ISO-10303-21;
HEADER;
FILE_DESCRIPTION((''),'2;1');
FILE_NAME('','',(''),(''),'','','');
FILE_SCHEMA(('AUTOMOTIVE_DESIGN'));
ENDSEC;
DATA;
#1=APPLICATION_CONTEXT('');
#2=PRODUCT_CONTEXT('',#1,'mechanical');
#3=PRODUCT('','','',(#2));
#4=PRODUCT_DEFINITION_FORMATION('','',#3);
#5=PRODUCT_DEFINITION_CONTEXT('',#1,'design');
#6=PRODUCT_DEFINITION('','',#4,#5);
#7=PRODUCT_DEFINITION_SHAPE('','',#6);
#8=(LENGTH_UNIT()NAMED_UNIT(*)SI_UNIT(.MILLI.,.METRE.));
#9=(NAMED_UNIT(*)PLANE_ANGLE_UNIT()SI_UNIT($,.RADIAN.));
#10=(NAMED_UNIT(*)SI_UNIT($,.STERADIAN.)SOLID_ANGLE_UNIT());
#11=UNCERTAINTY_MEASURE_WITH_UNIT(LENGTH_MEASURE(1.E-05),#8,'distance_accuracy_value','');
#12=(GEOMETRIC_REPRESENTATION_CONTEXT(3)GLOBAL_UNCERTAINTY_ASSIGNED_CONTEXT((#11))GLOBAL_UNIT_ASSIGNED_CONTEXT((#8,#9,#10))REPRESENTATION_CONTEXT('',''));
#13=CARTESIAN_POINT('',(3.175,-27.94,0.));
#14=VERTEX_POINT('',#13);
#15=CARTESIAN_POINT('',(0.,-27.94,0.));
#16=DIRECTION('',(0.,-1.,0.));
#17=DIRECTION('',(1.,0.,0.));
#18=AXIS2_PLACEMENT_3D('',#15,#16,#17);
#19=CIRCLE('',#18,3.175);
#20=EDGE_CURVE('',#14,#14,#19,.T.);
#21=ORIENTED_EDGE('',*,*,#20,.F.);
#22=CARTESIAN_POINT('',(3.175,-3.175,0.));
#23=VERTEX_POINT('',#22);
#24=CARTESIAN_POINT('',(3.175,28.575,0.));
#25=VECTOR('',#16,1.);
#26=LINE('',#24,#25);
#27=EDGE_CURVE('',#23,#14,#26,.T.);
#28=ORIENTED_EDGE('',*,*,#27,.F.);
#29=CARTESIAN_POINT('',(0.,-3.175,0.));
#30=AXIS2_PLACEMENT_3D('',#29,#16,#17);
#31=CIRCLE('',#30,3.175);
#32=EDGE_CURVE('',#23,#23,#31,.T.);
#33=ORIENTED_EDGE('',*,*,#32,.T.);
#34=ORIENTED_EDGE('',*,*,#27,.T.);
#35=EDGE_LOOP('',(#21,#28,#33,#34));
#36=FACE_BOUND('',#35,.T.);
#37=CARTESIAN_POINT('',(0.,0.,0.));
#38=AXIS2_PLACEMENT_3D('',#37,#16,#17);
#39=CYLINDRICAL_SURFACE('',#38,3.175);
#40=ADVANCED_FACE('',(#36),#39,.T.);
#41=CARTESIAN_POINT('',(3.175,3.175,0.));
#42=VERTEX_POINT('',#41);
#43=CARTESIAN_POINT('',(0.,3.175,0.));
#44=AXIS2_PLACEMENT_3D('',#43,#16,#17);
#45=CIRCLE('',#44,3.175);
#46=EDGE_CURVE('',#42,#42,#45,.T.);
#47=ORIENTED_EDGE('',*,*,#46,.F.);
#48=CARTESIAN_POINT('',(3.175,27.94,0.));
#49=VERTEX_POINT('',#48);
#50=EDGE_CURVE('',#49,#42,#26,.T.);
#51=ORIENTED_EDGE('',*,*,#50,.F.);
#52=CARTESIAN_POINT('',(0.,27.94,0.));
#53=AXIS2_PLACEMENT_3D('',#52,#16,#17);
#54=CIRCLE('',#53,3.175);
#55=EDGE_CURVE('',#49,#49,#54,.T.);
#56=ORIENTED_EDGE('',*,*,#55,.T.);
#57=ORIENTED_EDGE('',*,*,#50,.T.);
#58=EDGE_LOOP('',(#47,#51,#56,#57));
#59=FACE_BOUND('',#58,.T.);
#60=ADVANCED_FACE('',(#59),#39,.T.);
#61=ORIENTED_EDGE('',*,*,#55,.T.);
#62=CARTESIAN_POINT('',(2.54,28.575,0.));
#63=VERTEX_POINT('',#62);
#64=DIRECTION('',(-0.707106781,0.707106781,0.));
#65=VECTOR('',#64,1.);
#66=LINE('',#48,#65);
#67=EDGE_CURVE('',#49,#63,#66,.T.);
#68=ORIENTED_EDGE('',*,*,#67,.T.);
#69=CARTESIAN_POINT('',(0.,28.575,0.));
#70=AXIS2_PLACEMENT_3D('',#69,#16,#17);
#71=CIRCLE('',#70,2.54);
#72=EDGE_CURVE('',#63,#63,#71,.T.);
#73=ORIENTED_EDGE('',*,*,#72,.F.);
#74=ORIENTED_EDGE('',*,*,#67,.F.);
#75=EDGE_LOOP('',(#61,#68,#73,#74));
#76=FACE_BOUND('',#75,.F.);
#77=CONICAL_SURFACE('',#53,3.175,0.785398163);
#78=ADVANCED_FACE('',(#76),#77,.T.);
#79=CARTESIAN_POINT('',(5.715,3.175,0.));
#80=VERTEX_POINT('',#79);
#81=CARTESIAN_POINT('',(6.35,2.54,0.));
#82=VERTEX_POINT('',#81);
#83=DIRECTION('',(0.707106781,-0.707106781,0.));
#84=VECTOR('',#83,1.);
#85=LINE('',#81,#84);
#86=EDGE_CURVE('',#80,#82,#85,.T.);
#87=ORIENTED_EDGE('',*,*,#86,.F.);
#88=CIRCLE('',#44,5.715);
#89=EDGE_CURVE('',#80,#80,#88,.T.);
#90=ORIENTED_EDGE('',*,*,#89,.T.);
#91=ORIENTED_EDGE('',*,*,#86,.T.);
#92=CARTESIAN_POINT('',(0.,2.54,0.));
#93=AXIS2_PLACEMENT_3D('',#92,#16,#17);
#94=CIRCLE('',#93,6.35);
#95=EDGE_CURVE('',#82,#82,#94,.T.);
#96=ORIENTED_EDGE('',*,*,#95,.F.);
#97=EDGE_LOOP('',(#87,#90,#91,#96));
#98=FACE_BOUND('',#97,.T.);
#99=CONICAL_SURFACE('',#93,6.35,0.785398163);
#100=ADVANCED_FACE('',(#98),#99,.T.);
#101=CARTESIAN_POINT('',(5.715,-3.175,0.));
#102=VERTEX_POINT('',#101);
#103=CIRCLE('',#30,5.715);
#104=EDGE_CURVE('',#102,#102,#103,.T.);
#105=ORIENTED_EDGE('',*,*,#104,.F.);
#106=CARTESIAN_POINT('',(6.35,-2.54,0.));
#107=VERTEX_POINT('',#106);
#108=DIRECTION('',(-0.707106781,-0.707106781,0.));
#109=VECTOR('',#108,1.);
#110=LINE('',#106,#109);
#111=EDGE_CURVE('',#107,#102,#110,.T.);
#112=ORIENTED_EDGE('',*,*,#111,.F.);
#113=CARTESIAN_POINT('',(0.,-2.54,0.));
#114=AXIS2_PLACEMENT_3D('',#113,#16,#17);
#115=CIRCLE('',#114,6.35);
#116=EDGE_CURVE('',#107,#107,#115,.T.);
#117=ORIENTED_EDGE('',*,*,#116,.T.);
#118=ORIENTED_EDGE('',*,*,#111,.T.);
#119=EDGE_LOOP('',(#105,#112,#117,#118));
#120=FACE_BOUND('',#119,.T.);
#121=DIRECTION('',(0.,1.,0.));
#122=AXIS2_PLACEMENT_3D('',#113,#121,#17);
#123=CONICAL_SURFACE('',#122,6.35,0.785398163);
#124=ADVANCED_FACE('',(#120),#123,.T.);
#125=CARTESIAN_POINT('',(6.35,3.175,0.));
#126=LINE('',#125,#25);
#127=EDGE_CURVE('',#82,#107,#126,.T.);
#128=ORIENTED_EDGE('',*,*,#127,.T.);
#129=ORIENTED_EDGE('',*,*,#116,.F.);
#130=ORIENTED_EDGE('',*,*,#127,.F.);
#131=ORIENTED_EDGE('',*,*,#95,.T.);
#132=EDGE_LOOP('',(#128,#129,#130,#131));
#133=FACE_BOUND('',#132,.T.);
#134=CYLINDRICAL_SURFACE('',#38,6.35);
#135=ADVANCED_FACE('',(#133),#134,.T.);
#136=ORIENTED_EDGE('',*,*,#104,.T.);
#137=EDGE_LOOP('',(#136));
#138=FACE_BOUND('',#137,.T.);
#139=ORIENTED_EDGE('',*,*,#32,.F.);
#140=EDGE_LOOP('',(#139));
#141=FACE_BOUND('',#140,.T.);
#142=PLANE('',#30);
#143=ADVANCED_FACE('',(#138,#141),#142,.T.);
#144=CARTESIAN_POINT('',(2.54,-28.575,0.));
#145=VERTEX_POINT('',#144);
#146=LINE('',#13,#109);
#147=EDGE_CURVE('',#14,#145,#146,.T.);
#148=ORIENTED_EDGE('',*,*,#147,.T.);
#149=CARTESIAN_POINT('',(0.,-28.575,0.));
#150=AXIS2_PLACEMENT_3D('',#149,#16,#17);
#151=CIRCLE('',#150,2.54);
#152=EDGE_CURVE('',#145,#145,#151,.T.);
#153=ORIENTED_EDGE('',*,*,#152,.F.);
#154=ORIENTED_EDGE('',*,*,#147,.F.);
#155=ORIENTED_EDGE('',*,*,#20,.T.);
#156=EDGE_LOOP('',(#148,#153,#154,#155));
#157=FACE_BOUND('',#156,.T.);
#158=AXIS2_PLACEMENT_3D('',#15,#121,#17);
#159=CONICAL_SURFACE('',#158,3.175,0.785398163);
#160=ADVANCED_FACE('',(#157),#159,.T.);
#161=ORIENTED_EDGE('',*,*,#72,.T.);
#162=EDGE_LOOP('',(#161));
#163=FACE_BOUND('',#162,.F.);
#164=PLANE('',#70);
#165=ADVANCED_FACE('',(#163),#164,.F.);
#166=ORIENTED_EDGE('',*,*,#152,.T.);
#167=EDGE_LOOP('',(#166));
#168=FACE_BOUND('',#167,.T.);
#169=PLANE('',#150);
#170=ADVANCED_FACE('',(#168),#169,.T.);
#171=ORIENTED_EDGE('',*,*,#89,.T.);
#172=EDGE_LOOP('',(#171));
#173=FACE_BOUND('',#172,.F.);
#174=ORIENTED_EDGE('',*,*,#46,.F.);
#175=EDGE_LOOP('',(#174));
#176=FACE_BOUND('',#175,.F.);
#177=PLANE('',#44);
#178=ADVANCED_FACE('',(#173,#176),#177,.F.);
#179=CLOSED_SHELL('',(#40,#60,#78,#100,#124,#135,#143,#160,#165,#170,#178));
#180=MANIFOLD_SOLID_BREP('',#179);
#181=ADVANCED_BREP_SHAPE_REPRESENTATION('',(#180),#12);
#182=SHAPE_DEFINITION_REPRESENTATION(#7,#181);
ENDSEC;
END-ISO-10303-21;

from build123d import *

# Parameters (mm, degrees)
F0_R     = 3.175
F1_DEPTH = 28.575
F0_R_2   = 6.35
F2_DEPTH = 3.175
F3_SIZE  = 0.635


with BuildPart() as f1:
    # F0 (on Front) → F1 (new body, symmetric)
    with BuildSketch(Plane.XZ):
        Circle(F0_R)
    extrude(amount=F1_DEPTH, both=True)

    # F0 (on Front) → F2 (join, symmetric)
    with BuildSketch(Plane.XZ):
        Circle(F0_R_2)
        Circle(F0_R, mode=Mode.SUBTRACT)
    extrude(amount=F2_DEPTH, both=True)

    # F3
    f3_edges = [f1.edges().sort_by_distance(p)[0] for p in [
        (-3.175, -28.575, 0),
        (-3.175, 28.575, 0),
        (-6.35, -3.175, 0),
        (-6.35, 3.175, 0),
    ]]
    chamfer(f3_edges, length=F3_SIZE)


solid = f1.part
